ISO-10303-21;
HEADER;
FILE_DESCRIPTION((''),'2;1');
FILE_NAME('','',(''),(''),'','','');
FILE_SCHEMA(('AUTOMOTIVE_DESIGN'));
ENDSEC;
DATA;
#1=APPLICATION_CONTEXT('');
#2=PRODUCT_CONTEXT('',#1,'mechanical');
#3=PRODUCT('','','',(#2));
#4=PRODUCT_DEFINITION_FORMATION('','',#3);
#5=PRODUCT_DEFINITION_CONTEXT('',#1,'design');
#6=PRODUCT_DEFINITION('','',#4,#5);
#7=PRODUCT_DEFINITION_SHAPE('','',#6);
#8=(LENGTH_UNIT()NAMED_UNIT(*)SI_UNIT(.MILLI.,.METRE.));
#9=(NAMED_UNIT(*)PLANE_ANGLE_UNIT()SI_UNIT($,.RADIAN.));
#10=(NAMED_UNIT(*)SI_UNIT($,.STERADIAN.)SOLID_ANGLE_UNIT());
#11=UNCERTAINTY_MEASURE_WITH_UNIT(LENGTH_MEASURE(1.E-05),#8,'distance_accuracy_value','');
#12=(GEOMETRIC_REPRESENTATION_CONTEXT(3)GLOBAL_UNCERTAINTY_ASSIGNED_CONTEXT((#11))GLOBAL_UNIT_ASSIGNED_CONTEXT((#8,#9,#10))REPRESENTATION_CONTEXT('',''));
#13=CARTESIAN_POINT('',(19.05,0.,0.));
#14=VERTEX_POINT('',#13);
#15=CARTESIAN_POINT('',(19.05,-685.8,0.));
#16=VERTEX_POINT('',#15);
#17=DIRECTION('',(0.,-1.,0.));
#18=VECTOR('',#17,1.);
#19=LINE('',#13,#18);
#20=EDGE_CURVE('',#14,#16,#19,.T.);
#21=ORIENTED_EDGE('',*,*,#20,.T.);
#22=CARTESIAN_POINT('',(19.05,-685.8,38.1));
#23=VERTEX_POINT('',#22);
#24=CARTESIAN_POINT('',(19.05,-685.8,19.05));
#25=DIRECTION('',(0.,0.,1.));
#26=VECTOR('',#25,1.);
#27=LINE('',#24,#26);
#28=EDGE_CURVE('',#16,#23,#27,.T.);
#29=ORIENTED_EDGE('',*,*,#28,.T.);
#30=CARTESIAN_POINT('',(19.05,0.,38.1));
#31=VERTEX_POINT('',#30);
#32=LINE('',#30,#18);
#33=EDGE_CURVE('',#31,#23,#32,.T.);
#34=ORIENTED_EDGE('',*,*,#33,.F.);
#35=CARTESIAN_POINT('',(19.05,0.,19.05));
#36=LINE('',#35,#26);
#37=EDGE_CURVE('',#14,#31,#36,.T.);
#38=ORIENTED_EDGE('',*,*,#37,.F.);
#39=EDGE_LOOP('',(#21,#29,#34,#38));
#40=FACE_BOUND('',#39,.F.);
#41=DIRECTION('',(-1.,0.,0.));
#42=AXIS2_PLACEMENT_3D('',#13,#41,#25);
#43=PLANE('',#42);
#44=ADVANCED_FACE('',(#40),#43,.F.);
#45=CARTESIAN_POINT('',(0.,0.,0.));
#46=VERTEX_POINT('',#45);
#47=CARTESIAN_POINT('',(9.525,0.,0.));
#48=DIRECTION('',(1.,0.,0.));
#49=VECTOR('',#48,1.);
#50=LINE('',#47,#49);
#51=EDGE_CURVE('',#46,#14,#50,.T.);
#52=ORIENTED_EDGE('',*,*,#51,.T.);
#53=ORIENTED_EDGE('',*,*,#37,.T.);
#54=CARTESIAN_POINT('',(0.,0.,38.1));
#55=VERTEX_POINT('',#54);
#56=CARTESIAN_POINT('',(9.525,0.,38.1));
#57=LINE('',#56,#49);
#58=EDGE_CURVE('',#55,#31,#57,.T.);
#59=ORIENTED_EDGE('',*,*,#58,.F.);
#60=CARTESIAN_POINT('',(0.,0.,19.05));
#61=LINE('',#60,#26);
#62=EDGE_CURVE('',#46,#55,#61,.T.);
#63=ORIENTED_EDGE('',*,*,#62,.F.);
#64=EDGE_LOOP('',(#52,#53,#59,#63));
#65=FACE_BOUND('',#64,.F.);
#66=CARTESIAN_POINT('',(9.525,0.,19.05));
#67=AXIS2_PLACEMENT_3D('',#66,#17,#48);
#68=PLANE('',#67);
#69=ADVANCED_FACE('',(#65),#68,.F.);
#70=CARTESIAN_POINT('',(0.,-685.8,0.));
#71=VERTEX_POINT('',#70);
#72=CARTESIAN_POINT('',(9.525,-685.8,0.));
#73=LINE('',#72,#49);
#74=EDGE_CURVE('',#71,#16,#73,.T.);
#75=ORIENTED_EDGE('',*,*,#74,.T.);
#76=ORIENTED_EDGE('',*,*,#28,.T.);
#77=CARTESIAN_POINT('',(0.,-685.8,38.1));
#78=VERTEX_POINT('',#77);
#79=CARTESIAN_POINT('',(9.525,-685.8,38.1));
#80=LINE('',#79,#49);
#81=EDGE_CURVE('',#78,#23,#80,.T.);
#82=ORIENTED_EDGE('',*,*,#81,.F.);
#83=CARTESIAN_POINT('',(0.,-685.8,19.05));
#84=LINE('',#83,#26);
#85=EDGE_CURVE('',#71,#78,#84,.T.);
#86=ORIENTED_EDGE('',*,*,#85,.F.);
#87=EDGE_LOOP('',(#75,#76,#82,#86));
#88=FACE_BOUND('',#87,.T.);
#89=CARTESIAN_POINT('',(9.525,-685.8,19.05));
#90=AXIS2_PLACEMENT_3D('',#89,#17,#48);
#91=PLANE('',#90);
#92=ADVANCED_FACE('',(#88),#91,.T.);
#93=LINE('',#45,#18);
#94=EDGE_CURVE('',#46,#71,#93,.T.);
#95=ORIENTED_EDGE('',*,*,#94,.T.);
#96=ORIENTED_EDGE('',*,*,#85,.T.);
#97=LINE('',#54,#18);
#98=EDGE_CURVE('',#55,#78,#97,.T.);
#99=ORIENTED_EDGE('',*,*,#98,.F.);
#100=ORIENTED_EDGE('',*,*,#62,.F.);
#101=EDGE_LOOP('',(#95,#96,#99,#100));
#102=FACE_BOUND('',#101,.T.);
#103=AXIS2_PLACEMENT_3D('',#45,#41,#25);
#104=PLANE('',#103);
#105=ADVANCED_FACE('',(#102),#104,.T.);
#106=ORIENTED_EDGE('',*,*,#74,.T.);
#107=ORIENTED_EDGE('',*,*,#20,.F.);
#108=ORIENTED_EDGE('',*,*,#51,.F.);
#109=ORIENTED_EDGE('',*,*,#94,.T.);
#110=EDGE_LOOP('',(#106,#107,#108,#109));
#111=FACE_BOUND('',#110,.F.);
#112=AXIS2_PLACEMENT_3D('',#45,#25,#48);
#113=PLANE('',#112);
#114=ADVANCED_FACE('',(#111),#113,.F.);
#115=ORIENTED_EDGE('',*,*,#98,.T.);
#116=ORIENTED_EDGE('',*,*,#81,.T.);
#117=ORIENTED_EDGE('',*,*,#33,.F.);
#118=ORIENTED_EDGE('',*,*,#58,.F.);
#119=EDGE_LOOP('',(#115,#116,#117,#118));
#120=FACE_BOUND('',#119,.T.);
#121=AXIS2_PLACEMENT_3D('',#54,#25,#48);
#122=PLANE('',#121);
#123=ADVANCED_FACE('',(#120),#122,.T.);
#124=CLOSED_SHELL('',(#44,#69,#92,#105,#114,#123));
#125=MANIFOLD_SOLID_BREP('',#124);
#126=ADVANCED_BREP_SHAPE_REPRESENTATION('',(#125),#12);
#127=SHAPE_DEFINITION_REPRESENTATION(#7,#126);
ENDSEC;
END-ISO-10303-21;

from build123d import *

# Parameters (mm, degrees)
F1_W     = 19.05
F1_H     = 38.1
F2_DEPTH = 685.8


# Not quite as in the source:
# - a variable given as a bare number and used for a length is read in inches; the dataset says mm whatever the document's units were


with BuildPart() as f2:
    # F1 (on Front) → F2 (new body)
    with BuildSketch(Plane.XZ):
        with Locations((9.525, 19.05)):
            Rectangle(F1_W, F1_H)
    extrude(amount=F2_DEPTH)


solid = f2.part
